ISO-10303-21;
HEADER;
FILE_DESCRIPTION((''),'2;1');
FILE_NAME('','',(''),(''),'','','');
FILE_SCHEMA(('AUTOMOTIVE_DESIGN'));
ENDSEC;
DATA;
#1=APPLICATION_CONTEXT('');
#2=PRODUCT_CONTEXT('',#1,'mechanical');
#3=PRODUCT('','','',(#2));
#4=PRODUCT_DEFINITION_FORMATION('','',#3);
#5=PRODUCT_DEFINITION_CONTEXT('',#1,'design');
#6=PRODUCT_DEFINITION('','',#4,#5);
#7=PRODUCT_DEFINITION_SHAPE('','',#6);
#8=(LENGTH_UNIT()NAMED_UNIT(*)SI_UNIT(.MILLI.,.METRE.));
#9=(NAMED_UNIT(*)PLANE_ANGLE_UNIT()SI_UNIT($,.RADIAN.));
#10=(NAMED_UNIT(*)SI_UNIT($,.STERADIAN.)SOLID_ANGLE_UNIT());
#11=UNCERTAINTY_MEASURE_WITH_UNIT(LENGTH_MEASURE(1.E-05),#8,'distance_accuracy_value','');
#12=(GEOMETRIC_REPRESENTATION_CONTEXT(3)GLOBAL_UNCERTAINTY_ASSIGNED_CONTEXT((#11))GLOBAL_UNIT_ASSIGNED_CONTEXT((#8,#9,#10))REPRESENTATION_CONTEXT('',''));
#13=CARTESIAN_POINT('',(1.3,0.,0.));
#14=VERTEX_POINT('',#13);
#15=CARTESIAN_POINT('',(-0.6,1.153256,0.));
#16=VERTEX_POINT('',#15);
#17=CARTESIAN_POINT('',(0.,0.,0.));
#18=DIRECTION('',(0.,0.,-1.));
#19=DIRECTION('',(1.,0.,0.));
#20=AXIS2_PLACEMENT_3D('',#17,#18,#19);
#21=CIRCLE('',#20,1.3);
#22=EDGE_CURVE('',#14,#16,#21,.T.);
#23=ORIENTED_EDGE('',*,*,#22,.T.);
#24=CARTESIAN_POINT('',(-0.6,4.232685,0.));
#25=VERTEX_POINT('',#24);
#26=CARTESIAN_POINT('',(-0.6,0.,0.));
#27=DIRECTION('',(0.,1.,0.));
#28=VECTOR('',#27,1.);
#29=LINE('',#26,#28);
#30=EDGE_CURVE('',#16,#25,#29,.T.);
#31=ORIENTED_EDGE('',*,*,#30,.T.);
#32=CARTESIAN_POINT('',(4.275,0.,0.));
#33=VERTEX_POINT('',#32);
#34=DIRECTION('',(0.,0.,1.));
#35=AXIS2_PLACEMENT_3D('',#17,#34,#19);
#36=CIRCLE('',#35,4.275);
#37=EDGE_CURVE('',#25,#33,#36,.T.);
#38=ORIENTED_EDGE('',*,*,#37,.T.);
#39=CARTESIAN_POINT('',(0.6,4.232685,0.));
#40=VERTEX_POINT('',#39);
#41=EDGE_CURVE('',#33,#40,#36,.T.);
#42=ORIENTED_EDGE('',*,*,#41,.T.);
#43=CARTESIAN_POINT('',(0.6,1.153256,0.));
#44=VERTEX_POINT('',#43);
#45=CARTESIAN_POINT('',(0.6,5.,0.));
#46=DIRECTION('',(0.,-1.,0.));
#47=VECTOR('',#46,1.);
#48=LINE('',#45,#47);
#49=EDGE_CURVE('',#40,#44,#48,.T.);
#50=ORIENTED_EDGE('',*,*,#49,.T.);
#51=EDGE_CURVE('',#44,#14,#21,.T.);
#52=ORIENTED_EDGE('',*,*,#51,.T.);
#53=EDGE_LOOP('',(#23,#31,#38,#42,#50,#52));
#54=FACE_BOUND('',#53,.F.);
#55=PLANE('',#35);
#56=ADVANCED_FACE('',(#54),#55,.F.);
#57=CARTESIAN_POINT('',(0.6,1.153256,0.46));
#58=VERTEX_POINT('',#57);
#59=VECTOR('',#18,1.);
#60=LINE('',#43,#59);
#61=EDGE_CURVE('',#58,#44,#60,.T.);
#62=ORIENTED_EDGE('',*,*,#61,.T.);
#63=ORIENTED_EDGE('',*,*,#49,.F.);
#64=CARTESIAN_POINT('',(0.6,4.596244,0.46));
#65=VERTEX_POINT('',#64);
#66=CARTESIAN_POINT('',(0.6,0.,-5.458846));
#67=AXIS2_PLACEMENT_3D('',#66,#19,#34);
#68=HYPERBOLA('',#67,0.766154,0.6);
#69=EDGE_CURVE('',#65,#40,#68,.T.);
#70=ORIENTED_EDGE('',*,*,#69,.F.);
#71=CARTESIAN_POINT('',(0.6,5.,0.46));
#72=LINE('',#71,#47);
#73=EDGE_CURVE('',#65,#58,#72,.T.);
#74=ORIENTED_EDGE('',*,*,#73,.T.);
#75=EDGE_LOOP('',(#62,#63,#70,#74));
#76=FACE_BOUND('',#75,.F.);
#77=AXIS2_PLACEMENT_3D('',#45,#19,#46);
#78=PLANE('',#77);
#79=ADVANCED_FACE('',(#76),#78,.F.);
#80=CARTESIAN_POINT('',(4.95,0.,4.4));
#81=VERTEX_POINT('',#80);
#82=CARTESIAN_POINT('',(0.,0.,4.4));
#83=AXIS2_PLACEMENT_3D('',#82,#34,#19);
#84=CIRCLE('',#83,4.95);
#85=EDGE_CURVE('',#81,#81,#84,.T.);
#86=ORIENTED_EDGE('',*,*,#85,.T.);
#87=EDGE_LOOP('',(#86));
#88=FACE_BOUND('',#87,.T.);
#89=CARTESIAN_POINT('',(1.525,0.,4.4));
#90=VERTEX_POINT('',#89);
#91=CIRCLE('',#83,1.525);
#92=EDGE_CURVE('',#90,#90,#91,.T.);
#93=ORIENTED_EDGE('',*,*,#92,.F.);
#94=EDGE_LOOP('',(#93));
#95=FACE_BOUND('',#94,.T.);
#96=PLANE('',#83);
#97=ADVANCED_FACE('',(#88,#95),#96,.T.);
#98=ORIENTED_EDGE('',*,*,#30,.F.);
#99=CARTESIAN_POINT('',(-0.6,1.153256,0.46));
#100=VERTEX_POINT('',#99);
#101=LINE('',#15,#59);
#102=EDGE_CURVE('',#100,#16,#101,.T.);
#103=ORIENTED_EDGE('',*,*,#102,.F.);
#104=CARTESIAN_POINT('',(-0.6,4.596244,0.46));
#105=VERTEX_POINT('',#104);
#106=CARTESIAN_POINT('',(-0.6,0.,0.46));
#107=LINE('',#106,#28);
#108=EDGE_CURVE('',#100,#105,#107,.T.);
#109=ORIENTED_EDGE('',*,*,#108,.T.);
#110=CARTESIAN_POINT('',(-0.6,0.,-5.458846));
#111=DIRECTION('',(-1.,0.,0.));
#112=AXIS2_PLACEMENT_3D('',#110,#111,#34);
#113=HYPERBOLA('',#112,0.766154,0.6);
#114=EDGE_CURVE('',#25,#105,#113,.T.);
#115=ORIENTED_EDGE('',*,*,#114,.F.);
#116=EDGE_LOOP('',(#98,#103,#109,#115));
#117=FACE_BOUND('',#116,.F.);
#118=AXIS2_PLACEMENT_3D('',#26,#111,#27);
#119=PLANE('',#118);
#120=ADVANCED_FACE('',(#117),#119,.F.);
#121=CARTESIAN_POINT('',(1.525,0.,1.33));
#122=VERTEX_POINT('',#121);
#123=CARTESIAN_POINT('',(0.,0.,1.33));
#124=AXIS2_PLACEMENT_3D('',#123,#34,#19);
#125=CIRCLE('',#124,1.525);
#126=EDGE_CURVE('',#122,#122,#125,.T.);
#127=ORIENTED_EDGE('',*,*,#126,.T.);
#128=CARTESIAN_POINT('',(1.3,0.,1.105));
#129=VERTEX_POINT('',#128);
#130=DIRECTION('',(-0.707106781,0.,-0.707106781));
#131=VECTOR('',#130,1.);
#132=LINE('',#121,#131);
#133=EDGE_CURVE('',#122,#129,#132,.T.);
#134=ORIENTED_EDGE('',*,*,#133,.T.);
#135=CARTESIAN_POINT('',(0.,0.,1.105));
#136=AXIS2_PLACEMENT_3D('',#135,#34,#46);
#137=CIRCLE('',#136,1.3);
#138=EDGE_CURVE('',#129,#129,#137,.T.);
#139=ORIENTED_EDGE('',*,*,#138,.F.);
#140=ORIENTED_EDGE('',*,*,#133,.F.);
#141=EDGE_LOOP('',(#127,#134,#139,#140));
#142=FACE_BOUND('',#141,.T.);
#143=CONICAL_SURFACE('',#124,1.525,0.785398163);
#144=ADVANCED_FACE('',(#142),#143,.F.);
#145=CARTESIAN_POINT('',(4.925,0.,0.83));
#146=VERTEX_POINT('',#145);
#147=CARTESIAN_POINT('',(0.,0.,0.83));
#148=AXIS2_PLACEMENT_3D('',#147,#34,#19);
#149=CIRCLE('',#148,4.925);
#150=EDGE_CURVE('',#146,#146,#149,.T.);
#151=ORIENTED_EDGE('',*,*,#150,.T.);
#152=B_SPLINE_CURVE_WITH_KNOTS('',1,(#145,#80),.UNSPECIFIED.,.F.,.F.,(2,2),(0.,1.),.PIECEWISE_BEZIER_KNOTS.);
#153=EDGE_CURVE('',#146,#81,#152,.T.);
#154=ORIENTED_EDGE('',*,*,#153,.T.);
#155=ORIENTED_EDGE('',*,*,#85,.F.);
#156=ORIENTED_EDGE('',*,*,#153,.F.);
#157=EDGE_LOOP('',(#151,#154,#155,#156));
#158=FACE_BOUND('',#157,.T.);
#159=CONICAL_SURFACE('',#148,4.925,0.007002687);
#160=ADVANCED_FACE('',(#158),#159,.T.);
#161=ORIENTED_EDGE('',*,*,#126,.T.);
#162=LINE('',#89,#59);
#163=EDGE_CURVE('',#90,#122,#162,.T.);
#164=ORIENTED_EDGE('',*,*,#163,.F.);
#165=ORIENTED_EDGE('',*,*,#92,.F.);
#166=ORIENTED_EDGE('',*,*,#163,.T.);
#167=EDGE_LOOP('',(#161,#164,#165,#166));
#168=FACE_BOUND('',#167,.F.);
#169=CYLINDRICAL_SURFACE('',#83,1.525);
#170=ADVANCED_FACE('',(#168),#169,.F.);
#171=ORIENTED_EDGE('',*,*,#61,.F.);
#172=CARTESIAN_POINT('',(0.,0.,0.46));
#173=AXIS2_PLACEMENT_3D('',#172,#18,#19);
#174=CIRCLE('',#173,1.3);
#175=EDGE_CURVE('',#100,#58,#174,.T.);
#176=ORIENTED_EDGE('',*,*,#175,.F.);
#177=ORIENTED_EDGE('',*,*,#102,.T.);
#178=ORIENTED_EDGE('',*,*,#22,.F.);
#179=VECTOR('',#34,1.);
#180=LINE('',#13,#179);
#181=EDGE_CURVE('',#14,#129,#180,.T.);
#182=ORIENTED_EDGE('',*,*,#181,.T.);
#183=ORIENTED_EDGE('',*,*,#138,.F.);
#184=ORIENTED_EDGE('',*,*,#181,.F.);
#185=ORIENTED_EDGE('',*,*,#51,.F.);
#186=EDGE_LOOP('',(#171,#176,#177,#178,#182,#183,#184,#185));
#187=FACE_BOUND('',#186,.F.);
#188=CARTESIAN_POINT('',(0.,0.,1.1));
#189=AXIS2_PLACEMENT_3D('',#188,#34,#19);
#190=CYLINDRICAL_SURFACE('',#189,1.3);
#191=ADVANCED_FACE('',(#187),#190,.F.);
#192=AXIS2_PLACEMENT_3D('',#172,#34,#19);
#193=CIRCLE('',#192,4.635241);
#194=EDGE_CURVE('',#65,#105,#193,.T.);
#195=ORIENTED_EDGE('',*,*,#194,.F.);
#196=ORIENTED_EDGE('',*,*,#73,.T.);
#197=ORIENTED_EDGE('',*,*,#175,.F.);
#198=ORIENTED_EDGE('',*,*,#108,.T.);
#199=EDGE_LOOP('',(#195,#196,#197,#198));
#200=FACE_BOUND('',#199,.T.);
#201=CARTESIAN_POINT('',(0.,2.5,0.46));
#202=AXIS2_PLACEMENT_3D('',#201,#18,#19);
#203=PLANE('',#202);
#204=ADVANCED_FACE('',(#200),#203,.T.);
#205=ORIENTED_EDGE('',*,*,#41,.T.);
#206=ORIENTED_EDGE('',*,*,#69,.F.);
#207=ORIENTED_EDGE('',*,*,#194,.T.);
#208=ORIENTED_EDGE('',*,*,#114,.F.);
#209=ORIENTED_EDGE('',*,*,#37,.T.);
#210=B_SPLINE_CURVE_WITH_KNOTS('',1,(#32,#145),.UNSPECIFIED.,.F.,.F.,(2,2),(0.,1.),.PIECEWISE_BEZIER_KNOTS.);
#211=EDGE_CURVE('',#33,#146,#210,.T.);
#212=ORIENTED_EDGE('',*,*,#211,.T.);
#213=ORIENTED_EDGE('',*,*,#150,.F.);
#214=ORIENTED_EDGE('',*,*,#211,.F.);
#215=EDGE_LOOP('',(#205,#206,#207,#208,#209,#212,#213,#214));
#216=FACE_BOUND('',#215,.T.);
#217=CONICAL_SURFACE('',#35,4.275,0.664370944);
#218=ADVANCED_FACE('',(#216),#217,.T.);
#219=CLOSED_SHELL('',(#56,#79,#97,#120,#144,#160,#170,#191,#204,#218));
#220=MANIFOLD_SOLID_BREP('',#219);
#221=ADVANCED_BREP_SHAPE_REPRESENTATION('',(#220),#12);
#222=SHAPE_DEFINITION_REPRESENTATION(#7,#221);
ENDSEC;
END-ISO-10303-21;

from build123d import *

# Parameters (mm, degrees)
F0_R         = 4.275
F2_R         = 4.925
F4_R         = 4.95
F8_R         = 1.525
F9_DEPTH     = 3.57
F10_R        = 1.3
F11_DEPTH    = 0.83
F13_DEPTH    = 0.46
F14_S5_R     = 1.3
F14_T6_DEPTH = 4


# Not quite as in the source:
# - a fillet or chamfer that OpenCascade refuses, or shapes differently, is made with other operations: its cross-section is extruded or revolved along the edge and cut away or added


with BuildPart() as f6:
    # F0 (on Top) → F6 section 0
    with BuildSketch(Plane.XY):
        Circle(F0_R)
    # F2 (on offset) → F6 section 1
    with BuildSketch(Plane.XY.offset(0.83)):
        Circle(F2_R)
    loft()

    # F2 (on offset) → F7 section 0
    with BuildSketch(Plane.XY.offset(0.83)):
        Circle(F2_R)
    # F4 (on offset) → F7 section 1
    with BuildSketch(Plane.XY.offset(4.4)):
        Circle(F4_R)
    loft()

    # F8 (on face) → F9 (cut, through all)
    with BuildSketch(Plane.XY.offset(4.4)):
        Circle(F8_R)
    extrude(amount=-F9_DEPTH, mode=Mode.SUBTRACT)

    # F10 (on face) → F11 (cut, through all)
    with BuildSketch(Plane(origin=(0, 0, 0), x_dir=(1, 0, 0), z_dir=(0, 0, -1))):
        Circle(F10_R)
    extrude(amount=-F11_DEPTH, mode=Mode.SUBTRACT)

    # F12 (on face) → F13 (cut)
    with BuildSketch(Plane(origin=(0, 0, 0), x_dir=(1, 0, 0), z_dir=(0, 0, -1))):
        Polygon((-0.6, -5), (0, -5), (0.6, -5), (0.6, 0), (0, 0), (-0.6, 0), align=None)
    extrude(amount=-F13_DEPTH, mode=Mode.SUBTRACT)

    # F14: chamfer of 0.5 on 1 edges, made by hand


with BuildPart() as f14_tool2:
    # F14_s3 → F14_t4 (revolve)
    with BuildSketch(Plane.XZ):
        Polygon((1.525, 1.33), (1.025, 0.83), (1.525, 0.83), align=None)
    revolve(axis=Axis((0, 0, 0.83), (0, 0, 1)))

    # F14_s5 → F14_t6 (cut, symmetric)
    with BuildSketch(Plane.XY.offset(1.1)):
        Circle(F14_S5_R)
    extrude(amount=F14_T6_DEPTH, both=True, mode=Mode.SUBTRACT)


with BuildPart() as f6_1:
    add(f6.part)

    # F14_t1: union F14_tool2
    add(f14_tool2.part)


solid = f6_1.part
